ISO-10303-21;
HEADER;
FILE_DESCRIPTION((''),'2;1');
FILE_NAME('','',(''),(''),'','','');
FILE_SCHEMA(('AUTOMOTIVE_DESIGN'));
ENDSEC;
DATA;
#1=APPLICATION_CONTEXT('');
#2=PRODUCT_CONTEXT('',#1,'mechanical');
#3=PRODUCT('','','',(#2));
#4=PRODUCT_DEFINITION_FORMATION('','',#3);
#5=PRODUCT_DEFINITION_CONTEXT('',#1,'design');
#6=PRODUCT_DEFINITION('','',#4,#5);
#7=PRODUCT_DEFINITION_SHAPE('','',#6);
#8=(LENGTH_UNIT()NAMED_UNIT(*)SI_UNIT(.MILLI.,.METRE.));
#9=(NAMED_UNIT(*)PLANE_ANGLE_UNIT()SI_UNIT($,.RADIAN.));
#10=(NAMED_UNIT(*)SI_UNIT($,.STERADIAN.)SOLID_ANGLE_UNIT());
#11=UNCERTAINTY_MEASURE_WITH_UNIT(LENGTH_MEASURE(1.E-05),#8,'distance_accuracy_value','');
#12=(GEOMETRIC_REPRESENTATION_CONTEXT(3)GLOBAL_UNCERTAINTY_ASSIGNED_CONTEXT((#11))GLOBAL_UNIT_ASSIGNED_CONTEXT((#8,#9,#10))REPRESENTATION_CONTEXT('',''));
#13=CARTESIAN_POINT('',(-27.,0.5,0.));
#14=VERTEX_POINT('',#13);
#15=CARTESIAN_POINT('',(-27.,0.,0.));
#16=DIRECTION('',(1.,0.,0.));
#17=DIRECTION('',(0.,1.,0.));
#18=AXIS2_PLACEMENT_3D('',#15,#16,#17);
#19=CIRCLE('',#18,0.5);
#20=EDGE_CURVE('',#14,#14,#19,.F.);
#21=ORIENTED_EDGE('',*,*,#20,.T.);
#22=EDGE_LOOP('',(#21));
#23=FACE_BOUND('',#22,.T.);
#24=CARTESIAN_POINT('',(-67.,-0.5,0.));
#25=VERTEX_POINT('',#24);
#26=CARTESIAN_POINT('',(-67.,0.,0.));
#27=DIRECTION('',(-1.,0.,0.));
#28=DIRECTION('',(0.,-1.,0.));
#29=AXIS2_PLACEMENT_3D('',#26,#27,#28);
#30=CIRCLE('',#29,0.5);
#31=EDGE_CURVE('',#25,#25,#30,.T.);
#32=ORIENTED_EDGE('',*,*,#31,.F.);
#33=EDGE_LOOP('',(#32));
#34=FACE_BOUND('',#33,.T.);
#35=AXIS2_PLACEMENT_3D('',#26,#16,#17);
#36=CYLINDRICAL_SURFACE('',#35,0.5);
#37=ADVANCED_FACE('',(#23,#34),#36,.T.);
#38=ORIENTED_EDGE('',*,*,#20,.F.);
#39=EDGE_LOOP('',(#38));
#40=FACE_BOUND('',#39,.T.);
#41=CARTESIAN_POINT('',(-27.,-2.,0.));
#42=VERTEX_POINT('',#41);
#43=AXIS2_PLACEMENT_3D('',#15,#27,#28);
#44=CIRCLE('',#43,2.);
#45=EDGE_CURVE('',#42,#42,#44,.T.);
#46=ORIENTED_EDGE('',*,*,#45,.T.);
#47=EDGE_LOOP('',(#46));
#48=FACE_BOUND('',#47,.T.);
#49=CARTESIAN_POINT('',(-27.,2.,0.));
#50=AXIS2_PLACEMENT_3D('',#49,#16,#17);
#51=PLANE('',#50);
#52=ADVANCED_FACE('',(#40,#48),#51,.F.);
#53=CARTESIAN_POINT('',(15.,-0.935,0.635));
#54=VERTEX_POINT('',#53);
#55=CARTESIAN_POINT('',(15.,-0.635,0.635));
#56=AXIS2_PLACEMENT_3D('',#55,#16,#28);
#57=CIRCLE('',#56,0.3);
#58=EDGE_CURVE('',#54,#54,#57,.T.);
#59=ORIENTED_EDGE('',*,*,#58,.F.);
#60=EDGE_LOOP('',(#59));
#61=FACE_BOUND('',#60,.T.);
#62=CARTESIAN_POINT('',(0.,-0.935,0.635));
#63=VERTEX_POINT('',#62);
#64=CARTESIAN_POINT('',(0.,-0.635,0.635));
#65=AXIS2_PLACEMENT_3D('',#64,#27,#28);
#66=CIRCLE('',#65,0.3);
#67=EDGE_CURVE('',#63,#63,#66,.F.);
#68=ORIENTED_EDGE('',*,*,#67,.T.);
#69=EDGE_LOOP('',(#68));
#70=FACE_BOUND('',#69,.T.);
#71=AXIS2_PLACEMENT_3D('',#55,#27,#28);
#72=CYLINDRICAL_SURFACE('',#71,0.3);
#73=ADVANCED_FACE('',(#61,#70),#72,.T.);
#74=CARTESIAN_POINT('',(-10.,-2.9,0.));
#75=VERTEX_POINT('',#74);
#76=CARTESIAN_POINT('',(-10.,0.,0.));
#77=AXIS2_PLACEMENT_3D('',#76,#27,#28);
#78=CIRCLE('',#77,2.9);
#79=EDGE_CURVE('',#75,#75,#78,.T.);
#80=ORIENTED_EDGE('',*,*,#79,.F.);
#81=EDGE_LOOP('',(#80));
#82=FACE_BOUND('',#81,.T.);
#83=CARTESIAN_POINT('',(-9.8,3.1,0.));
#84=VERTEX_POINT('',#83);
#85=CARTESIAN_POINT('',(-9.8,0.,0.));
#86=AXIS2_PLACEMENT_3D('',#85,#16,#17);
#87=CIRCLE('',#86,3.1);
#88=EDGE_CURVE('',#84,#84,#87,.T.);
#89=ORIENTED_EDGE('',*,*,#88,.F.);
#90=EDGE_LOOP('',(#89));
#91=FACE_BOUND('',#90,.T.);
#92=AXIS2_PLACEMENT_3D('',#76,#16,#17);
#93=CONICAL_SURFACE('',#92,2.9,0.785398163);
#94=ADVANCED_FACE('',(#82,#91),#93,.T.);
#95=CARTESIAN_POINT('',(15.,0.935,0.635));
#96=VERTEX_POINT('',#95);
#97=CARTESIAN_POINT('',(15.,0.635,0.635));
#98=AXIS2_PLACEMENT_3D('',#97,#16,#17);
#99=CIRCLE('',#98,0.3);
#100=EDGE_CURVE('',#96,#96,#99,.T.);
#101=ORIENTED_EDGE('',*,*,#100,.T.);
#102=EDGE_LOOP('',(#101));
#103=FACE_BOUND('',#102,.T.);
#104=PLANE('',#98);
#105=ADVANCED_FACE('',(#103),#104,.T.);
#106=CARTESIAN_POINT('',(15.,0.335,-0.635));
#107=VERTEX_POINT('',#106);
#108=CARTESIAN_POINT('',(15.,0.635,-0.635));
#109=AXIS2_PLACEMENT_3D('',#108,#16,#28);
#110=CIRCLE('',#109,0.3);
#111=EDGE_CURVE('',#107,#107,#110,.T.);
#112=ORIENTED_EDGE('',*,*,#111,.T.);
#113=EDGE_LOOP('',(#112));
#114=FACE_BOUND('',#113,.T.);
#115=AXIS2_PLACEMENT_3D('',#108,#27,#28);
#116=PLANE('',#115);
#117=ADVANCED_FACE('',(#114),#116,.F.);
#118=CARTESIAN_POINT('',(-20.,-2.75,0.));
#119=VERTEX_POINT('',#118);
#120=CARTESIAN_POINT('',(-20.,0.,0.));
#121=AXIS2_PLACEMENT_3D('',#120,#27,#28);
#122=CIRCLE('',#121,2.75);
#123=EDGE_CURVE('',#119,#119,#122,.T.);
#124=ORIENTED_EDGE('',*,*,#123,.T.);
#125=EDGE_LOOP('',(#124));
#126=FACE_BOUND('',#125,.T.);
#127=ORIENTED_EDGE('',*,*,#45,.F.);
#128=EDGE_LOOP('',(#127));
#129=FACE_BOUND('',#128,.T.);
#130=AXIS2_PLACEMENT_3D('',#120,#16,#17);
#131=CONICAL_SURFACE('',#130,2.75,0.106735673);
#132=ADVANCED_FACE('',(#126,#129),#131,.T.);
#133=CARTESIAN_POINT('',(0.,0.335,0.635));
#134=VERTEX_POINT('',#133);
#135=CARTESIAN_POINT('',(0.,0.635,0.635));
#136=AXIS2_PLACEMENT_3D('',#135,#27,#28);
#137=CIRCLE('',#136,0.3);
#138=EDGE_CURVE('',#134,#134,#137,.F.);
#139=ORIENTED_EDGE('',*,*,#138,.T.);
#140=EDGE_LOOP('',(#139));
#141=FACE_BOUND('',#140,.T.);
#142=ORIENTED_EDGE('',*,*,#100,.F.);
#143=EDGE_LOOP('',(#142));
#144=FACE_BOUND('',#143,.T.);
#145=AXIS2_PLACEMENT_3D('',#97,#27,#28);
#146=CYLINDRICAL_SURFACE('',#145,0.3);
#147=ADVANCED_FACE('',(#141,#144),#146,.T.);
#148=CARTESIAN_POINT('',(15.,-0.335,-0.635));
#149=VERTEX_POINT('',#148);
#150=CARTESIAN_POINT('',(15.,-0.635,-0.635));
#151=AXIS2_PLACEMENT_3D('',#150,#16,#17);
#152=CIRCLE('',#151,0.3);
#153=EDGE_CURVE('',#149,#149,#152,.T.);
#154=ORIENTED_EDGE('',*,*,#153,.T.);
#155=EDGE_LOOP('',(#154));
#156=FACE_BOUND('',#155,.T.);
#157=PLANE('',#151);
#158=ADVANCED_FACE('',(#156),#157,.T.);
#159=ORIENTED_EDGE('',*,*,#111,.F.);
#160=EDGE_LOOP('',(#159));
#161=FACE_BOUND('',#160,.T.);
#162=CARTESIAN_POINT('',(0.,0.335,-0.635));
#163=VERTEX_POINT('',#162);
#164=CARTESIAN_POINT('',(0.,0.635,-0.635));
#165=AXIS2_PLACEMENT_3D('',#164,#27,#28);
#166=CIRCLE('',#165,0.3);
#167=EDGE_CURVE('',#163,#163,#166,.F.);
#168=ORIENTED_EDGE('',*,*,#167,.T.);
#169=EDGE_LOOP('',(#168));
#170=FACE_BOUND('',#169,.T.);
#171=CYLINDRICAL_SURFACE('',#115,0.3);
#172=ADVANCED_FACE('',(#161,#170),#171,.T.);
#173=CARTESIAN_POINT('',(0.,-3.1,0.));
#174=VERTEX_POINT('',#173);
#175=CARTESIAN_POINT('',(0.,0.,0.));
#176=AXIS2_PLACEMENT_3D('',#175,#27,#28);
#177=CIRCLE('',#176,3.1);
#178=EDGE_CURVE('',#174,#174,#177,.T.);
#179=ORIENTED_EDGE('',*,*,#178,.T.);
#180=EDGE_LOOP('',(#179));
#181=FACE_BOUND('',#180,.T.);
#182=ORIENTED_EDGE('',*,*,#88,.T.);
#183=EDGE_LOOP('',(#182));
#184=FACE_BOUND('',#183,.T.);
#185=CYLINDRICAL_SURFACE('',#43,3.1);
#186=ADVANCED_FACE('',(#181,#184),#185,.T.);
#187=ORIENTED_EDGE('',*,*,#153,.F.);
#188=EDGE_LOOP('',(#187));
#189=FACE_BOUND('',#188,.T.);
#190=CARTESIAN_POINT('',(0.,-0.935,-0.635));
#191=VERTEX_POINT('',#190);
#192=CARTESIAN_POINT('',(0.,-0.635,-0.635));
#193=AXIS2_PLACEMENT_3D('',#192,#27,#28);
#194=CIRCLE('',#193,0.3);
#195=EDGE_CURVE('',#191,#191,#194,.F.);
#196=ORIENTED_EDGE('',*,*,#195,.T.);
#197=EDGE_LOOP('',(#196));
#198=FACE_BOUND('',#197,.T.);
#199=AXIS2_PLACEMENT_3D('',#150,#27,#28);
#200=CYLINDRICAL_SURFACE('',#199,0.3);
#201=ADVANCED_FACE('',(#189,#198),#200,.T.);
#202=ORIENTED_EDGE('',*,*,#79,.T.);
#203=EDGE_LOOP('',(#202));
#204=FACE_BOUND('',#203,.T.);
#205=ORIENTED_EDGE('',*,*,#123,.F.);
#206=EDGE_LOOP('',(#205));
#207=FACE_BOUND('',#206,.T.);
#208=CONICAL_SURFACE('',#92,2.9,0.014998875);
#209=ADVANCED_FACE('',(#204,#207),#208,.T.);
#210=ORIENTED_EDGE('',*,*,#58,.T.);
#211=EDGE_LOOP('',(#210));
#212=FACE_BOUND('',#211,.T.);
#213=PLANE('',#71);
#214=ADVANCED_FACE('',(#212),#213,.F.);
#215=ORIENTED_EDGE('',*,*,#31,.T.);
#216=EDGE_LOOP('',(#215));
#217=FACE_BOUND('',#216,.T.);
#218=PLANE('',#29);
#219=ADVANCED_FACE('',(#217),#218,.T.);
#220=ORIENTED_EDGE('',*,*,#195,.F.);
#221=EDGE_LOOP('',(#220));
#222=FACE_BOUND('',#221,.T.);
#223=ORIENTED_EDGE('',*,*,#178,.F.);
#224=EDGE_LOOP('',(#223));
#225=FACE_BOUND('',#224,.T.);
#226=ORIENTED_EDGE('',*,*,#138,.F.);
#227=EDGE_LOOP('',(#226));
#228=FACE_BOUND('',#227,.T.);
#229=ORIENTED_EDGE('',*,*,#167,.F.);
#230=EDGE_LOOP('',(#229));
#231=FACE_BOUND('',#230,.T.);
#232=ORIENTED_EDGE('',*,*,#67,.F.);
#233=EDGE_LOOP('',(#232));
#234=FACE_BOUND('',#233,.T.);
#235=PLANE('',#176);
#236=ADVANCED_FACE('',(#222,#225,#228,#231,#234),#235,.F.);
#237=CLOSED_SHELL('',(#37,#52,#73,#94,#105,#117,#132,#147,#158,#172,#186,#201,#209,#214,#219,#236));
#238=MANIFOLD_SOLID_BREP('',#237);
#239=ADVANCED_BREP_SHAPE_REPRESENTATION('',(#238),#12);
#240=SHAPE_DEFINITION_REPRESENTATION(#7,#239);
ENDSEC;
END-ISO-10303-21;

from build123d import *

# Parameters (mm, degrees)
CHAMFER_1_SIZE  = 0.2
SKETCH_5_R      = 0.3
EXTRUDE_2_DEPTH = 15
SKETCH_6_R      = 0.5
EXTRUDE_1_DEPTH = 40


# Read off the part's stored shape, not the designer's step: 旋转2
with BuildPart() as part:
    # 旋转2 outline → 旋转2 (revolve)
    with BuildSketch(Plane.YX):
        Polygon((3.1, 0), (0, 0), (0, -27), (2, -27), (2.75, -20), (2.9, -10), (3.1, -10), align=None)
    revolve(axis=Axis((0, 0, 0), (1, 0, 0)))

    # 倒角1
    chamfer_1_edges = [part.edges().sort_by_distance(p)[0] for p in [
        (-10, -3.1, 0),
    ]]
    chamfer(chamfer_1_edges, length=CHAMFER_1_SIZE - 0.0001)  # a hair under: the kernel refuses the full size

    # 草图5 → 拉伸2 (add)
    with BuildSketch(Plane(origin=(0, 0, 0), x_dir=(0, 0, -1), z_dir=(1, 0, 0))):
        with Locations(Location((-0.635, 0.635, 0), (0, 0, 270))):
            Circle(SKETCH_5_R)
        with Locations(Location((-0.635, -0.635, 0), (0, 0, 270))):
            Circle(SKETCH_5_R)
        with Locations(Location((0.635, 0.635, 0), (0, 0, 270))):
            Circle(SKETCH_5_R)
        with Locations(Location((0.635, -0.635, 0), (0, 0, 270))):
            Circle(SKETCH_5_R)
    extrude(amount=EXTRUDE_2_DEPTH)

    # 草图6 → Extrude 1 (add)
    with BuildSketch(Plane.ZY.offset(27)):
        with Locations(Location((0, 0, 0), (0, 0, 90))):
            Circle(SKETCH_6_R)
    extrude(amount=EXTRUDE_1_DEPTH)


solid = part.part
